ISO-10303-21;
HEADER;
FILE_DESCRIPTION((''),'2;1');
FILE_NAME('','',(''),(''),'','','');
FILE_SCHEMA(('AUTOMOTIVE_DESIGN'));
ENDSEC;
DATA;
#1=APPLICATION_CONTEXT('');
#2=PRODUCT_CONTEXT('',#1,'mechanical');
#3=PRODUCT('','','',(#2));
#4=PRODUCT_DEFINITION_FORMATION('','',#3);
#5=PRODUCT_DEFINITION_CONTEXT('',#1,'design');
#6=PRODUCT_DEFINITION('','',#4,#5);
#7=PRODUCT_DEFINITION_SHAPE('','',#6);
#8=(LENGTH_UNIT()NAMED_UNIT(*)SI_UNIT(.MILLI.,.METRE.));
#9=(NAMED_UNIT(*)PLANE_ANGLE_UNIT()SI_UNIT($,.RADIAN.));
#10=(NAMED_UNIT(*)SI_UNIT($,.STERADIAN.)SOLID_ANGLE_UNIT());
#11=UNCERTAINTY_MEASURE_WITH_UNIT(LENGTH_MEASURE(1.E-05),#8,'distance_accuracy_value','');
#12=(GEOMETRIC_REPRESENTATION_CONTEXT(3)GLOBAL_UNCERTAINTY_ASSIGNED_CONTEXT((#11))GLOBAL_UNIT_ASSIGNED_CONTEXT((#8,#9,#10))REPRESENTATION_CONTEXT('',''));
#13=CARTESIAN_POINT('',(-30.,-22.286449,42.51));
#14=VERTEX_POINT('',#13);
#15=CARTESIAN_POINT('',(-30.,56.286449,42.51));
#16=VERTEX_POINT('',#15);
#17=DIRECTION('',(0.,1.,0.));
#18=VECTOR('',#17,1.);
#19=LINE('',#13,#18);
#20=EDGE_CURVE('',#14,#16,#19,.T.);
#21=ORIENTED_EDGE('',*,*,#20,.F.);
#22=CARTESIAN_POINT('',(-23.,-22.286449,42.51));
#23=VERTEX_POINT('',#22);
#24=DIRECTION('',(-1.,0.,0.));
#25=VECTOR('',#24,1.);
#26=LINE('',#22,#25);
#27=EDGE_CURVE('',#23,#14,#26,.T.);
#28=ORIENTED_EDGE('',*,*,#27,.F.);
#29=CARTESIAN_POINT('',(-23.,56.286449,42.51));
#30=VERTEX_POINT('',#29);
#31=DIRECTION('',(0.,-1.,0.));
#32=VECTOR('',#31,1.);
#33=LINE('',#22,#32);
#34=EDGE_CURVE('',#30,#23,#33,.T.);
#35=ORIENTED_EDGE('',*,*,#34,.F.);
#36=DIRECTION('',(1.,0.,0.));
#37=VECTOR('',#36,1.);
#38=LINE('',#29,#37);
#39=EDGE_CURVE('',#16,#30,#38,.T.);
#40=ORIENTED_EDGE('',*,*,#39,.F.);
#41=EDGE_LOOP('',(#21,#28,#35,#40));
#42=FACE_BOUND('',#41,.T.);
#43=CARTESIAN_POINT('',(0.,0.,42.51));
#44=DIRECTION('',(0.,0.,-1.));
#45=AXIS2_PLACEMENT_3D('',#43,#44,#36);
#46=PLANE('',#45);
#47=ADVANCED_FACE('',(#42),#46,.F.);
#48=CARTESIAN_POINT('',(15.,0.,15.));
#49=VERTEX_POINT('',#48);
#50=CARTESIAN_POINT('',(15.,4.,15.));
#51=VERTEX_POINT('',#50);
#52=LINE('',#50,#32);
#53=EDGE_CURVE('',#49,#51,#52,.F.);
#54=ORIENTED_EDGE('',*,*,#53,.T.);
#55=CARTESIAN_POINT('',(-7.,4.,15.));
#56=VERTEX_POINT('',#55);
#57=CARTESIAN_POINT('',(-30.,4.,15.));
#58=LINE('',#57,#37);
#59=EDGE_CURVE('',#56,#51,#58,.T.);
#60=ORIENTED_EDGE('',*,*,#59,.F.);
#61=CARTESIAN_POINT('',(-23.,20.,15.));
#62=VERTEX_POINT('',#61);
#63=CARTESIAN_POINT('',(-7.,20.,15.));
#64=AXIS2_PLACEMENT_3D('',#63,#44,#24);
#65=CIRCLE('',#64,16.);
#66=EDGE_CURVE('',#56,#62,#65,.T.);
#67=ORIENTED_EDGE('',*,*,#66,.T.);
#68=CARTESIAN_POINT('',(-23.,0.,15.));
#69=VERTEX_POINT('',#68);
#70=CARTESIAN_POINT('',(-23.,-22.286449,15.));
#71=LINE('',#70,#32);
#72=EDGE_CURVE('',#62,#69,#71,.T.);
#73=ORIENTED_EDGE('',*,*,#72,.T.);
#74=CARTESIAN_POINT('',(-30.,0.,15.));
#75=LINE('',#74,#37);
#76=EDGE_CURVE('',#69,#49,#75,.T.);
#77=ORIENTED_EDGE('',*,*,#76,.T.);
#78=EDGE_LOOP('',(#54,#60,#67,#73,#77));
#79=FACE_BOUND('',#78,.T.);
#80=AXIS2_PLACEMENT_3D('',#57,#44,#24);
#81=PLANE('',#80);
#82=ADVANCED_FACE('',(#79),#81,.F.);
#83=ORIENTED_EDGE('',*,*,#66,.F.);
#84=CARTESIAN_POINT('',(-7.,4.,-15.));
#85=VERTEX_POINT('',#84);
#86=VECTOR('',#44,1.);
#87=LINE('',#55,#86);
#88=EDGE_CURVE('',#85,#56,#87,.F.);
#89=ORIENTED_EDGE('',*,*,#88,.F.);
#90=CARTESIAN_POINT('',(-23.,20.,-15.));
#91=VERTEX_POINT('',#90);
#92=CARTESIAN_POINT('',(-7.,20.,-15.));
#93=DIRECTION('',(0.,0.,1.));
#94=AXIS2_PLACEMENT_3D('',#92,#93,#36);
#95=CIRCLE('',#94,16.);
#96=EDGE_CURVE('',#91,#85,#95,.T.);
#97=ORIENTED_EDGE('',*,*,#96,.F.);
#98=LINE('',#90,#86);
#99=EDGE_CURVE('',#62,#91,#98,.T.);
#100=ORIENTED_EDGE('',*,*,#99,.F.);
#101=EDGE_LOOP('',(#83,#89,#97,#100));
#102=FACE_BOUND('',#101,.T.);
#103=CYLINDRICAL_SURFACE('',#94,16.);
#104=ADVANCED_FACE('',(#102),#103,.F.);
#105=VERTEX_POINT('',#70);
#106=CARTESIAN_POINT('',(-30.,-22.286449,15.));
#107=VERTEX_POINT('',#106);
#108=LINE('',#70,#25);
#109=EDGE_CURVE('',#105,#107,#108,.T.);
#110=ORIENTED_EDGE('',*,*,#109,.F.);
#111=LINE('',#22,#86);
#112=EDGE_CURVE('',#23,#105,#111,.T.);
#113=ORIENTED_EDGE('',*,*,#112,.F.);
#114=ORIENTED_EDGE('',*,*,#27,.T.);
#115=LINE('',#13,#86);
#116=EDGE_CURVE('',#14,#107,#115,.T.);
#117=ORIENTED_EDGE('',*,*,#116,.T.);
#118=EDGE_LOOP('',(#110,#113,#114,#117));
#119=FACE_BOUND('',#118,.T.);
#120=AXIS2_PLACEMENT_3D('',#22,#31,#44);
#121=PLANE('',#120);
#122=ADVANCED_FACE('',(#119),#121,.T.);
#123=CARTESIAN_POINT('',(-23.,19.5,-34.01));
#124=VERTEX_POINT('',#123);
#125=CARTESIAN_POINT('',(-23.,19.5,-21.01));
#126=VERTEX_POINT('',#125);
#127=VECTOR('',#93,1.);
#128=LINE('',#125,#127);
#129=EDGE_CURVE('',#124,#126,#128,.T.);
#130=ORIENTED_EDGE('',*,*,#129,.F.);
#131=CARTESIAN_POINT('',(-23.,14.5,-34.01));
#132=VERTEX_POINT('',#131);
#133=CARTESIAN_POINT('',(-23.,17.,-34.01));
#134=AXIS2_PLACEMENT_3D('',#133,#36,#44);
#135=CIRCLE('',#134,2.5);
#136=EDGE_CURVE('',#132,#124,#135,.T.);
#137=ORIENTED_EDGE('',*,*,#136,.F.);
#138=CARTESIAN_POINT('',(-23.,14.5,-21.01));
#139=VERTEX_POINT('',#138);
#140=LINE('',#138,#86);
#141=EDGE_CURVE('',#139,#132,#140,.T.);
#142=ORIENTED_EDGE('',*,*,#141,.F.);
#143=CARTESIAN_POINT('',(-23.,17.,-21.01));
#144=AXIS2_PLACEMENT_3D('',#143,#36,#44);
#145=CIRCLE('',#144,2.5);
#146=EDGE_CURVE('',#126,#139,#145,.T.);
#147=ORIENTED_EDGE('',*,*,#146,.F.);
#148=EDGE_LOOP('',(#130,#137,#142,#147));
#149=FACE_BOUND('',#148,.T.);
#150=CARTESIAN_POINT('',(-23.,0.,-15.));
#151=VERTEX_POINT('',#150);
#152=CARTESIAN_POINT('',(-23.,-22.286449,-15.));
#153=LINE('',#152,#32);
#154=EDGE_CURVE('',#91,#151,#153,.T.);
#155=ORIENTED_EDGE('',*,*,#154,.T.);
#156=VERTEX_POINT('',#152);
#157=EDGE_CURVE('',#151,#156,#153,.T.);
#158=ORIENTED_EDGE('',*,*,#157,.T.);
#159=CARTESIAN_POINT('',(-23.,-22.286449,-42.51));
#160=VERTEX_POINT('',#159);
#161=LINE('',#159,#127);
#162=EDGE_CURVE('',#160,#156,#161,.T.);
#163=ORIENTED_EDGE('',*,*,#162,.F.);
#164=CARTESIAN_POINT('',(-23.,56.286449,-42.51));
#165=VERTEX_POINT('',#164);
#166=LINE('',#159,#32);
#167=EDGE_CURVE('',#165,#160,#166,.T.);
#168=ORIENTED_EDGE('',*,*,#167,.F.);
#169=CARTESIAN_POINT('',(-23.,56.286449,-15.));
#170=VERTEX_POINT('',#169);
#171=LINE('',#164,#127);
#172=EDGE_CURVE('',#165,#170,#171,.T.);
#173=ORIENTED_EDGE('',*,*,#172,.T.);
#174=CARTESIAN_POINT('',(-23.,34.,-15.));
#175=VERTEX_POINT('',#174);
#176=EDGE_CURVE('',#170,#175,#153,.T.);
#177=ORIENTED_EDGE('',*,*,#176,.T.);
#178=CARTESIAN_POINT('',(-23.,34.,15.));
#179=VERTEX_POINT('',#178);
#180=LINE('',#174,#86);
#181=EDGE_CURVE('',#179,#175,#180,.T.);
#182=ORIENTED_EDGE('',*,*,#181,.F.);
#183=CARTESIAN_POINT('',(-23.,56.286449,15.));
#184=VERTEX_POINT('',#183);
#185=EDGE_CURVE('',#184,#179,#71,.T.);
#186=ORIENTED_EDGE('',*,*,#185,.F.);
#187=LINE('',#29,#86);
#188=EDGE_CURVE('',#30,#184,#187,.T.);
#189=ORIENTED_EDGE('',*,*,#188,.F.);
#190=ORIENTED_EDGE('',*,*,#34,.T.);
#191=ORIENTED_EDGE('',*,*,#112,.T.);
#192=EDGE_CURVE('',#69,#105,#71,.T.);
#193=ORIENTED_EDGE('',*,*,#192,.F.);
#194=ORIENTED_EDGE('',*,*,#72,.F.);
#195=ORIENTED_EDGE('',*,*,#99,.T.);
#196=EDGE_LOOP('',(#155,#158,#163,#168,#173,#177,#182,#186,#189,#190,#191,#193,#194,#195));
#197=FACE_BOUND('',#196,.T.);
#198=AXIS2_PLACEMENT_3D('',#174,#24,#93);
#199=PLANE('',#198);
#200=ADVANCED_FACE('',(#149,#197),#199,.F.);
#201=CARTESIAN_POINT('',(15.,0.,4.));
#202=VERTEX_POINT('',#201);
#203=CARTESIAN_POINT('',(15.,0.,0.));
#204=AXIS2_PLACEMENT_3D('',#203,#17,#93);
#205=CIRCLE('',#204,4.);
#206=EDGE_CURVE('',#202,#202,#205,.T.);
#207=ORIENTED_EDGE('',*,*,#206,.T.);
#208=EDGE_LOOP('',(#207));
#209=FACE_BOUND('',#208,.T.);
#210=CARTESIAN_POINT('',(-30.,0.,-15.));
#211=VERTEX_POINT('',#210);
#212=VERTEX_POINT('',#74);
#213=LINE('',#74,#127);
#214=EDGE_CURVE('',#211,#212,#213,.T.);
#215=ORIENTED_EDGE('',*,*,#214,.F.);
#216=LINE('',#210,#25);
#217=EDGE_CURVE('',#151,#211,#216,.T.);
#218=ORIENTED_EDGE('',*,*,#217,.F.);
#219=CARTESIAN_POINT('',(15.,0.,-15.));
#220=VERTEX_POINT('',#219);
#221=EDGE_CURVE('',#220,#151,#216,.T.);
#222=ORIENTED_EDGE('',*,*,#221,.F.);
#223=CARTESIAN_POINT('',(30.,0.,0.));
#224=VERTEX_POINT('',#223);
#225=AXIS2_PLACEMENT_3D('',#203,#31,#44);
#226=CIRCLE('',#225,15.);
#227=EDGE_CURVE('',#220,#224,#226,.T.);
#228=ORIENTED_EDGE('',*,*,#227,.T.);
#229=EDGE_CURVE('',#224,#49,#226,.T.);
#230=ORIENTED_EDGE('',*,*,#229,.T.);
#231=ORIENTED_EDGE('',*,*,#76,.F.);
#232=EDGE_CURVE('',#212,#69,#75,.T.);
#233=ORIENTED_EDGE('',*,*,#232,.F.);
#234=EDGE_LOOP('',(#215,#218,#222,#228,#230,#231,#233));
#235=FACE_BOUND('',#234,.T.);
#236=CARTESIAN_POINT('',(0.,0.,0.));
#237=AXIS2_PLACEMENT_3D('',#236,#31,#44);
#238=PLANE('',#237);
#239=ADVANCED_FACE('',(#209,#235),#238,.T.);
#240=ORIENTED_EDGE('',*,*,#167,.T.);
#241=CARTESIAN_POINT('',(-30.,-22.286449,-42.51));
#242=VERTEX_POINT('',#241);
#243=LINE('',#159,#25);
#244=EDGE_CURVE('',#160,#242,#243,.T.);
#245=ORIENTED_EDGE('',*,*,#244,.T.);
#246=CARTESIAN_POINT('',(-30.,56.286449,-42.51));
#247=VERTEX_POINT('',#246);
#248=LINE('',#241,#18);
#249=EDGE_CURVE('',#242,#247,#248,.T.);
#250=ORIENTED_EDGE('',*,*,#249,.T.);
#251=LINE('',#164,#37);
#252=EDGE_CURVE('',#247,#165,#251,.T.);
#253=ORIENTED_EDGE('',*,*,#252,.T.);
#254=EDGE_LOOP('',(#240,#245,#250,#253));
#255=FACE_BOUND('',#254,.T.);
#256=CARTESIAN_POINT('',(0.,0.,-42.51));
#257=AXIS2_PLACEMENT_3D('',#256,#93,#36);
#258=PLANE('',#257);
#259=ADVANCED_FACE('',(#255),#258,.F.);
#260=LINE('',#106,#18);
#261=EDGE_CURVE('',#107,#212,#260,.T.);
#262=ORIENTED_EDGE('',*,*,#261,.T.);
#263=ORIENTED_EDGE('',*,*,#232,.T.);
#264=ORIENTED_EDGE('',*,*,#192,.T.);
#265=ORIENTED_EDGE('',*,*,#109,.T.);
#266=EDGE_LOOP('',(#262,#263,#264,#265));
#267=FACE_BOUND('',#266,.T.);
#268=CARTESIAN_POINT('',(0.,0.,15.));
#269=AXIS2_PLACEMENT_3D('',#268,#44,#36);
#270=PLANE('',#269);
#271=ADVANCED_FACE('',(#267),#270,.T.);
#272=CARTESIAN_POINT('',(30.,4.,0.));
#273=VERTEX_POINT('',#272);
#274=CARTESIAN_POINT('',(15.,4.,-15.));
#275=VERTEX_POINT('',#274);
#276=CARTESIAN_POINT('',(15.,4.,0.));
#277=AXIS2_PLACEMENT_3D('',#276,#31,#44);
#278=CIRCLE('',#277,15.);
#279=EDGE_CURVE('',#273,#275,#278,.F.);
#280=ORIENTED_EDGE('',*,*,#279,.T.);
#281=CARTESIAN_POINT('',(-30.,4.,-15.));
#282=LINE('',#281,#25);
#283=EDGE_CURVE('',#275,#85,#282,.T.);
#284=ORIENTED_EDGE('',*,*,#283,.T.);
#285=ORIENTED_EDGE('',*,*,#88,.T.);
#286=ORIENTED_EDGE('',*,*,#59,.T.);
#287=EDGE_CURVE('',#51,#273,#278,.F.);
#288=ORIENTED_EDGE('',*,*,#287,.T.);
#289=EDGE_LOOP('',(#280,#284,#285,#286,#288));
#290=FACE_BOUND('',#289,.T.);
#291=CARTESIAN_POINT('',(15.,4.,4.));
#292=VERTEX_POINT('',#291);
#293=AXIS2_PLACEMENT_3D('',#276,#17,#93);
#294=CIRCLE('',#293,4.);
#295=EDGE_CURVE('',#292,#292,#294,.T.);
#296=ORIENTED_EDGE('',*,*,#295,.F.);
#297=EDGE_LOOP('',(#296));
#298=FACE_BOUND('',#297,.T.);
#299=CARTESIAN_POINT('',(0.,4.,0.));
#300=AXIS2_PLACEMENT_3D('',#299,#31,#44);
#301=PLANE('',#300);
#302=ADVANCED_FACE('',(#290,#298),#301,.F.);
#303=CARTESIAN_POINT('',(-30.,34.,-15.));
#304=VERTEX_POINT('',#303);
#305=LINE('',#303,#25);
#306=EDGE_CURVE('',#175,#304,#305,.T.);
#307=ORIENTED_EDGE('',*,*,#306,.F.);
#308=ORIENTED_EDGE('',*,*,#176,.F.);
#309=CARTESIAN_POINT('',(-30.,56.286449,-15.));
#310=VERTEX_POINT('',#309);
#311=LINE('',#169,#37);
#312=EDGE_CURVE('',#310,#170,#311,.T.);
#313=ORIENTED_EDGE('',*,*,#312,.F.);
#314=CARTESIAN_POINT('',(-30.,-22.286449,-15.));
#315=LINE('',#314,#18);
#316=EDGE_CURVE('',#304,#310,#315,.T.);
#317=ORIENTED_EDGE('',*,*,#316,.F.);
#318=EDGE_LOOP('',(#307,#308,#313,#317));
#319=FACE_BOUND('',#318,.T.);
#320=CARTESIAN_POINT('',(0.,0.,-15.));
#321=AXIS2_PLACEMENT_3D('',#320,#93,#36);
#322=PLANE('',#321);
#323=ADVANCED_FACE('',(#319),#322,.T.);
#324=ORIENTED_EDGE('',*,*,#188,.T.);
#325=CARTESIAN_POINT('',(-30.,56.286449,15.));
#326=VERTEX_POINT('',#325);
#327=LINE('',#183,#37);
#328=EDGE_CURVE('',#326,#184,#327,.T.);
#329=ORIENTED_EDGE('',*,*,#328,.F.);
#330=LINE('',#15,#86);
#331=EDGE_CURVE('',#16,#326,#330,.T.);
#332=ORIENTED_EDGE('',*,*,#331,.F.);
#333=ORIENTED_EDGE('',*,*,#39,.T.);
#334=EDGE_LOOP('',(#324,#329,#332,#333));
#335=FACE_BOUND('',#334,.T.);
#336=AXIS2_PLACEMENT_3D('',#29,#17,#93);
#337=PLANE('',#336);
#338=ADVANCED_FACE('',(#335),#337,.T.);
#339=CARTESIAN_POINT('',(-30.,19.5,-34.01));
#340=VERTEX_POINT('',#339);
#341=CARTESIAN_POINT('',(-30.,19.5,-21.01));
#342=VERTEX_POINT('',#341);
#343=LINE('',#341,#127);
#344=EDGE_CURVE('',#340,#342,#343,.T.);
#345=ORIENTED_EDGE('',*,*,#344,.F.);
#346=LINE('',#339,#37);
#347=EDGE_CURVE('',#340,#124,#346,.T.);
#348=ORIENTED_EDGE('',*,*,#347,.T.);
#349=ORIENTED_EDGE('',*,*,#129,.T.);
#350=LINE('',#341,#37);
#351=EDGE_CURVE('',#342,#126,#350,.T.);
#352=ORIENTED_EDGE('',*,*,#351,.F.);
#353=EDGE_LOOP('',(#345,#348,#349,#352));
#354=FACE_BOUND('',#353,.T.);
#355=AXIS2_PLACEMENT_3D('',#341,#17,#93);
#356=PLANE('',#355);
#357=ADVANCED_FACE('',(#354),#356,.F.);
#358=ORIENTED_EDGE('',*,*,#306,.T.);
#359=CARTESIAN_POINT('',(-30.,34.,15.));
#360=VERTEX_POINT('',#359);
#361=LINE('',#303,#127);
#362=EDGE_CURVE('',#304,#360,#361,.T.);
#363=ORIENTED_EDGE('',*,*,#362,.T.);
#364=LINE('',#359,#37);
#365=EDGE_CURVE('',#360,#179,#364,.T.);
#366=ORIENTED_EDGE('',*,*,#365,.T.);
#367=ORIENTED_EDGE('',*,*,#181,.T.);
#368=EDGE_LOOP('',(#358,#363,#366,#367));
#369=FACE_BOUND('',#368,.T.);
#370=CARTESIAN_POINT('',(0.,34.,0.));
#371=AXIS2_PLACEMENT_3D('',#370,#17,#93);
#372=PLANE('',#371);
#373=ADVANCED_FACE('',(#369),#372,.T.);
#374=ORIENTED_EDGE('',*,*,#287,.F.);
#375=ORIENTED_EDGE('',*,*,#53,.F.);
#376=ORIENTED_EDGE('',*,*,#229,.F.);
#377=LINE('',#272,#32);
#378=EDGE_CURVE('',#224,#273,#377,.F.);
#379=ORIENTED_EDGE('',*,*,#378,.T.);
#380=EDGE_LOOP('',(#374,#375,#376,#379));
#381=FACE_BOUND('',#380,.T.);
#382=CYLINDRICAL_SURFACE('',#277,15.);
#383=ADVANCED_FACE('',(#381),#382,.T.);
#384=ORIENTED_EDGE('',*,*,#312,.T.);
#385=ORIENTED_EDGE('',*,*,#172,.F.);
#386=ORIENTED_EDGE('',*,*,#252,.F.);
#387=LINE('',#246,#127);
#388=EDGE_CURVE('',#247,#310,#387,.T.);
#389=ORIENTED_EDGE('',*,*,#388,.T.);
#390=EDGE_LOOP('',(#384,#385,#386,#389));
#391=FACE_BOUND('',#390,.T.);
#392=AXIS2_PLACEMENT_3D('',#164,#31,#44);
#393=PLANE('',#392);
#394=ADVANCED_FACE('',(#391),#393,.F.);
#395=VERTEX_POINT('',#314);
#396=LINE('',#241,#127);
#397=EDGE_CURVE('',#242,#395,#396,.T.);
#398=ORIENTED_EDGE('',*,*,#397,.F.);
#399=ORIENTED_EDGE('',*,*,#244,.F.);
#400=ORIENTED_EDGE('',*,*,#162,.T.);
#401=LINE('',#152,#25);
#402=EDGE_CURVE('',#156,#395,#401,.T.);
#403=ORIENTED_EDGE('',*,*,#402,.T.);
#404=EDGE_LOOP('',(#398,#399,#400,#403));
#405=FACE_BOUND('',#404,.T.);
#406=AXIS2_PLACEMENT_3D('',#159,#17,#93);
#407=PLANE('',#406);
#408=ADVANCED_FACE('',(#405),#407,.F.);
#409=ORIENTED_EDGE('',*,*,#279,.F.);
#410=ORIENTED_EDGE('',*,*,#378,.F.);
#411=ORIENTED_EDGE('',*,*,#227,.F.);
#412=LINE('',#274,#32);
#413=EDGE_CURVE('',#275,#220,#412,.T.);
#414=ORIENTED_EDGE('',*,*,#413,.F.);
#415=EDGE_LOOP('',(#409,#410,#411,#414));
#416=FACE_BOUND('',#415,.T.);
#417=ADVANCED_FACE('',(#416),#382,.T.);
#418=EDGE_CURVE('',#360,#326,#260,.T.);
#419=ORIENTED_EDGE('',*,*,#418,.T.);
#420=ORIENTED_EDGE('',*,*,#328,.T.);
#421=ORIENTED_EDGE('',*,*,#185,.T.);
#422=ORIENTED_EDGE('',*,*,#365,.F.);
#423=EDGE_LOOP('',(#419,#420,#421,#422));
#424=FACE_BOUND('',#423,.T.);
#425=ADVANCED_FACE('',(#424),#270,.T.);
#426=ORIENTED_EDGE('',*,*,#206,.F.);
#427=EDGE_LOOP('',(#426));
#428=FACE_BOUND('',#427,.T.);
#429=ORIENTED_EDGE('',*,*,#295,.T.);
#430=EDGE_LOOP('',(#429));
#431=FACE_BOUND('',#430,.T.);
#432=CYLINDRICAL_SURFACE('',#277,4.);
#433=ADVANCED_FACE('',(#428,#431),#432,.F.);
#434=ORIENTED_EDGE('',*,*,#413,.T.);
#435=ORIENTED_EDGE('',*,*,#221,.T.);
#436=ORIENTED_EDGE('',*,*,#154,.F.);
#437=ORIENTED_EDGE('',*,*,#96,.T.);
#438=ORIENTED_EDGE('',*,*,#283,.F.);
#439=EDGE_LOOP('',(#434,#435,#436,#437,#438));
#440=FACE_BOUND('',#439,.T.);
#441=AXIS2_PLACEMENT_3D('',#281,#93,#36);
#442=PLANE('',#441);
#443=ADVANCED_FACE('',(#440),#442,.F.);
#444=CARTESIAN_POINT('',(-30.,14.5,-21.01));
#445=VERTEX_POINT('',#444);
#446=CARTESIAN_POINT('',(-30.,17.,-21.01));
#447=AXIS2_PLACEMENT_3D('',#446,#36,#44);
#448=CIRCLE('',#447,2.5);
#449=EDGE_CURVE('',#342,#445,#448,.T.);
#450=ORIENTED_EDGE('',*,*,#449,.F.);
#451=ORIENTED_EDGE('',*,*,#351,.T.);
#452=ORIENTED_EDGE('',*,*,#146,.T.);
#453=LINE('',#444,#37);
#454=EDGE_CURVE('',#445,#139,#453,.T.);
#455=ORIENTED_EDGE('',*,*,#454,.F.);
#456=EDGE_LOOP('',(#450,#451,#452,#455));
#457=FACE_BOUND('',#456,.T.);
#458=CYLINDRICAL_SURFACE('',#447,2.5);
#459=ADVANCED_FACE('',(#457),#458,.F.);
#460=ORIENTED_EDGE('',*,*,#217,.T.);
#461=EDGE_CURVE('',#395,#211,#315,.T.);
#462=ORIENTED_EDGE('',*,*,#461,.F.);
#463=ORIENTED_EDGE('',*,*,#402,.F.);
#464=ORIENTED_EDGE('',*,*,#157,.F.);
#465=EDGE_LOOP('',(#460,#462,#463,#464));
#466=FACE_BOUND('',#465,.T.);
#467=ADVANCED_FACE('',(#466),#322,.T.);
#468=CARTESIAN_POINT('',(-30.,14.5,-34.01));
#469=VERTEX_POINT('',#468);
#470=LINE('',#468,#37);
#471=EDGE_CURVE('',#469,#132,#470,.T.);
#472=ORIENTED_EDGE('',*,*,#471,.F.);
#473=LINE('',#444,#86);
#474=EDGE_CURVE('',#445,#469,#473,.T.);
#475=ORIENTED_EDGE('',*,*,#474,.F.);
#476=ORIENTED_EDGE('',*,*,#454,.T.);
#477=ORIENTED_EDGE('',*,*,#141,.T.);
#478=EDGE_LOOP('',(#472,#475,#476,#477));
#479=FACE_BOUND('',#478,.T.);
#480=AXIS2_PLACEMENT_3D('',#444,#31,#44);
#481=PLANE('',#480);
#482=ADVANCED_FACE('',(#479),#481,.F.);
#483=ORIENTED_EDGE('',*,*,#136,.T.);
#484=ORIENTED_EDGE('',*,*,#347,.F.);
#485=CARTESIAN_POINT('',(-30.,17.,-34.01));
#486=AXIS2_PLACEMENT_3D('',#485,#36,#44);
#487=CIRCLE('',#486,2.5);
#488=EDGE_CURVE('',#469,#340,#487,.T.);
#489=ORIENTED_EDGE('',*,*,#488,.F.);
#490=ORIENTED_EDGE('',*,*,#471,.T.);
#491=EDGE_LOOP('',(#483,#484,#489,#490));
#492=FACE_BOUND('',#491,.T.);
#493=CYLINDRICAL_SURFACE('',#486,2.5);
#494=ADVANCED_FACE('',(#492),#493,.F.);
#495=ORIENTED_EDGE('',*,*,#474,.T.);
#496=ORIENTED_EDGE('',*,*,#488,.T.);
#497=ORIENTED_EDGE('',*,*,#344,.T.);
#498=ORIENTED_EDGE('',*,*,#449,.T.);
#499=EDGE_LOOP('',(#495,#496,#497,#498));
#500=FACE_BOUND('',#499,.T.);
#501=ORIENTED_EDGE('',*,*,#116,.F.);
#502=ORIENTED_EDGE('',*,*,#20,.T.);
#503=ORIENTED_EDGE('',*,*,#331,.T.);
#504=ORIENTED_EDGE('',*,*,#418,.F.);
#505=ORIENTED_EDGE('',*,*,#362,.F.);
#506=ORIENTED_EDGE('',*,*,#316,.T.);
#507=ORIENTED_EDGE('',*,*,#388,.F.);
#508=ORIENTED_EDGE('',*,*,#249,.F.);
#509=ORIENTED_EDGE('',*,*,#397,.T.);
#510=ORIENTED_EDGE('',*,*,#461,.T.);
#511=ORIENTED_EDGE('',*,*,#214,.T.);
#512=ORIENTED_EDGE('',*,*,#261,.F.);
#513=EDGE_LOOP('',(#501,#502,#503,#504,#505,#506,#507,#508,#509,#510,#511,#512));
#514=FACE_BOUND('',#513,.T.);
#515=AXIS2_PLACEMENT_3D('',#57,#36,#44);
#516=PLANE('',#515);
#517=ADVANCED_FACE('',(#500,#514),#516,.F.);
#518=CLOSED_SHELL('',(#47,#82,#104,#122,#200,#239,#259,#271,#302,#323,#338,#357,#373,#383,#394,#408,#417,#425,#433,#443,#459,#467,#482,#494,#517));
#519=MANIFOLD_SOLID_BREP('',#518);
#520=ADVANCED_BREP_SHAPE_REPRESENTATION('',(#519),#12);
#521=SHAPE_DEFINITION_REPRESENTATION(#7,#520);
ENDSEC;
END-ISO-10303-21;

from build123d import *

# Parameters (mm, degrees)
SKETCH_1_W          = 60
SKETCH_1_H          = 30
SKETCH_1_R          = 4
EXTRUDE_1_DEPTH     = 4
SKETCH_2_W          = 7
SKETCH_2_H          = 30
EXTRUDE_2_DEPTH     = 30
SKETCH_4_W          = 7
SKETCH_4_H          = 78.572897546
EXTRUDE_3_DEPTH     = 27.51
FILLET_1_R          = 16
CUT_EXTRUDE_2_DEPTH = 89.228478483
FILLET_2_R          = 15


with BuildPart() as part:
    # 草圖1 → 填料-伸長1 (new body)
    with BuildSketch(Plane(origin=(0, 0, 0), x_dir=(1, 0, 0), z_dir=(0, 1, 0))):
        Rectangle(SKETCH_1_W, SKETCH_1_H)
        with Locations(Location((15, 0, 0), (0, 0, 270))):
            Circle(SKETCH_1_R, mode=Mode.SUBTRACT)
    extrude(amount=EXTRUDE_1_DEPTH)

    # 草圖2 → 填料-伸長2 (add)
    with BuildSketch(Plane(origin=(0, 4, 0), x_dir=(1, 0, 0), z_dir=(0, 1, 0))):
        with Locations((-26.5, 0)):
            Rectangle(SKETCH_2_W, SKETCH_2_H)
    extrude(amount=EXTRUDE_2_DEPTH)

    # 草圖4 → 填料-伸長3 (add)
    with BuildSketch(Plane(origin=(0, 0, -15), x_dir=(-1, 0, 0), z_dir=(0, 0, -1))):
        with Locations((26.5, 17)):
            Rectangle(SKETCH_4_W, SKETCH_4_H)
    extrude_3 = extrude(amount=EXTRUDE_3_DEPTH)

    # 鏡射1: 填料-伸長3 across plane
    add(extrude_3.mirror(Plane.XY))

    # 圓角1
    fillet_1_edges = [part.edges().sort_by_distance(p)[0] for p in [
        (-23, 4, 0),
    ]]
    fillet(fillet_1_edges, radius=FILLET_1_R)

    # 草圖5 → 除料-伸長2 (cut, through all)
    with BuildSketch(Plane(origin=(-23, 0, 0), x_dir=(0, 0, -1), z_dir=(1, 0, 0))):
        with BuildLine():
            Line((21.01, 19.5), (34.01, 19.5))
            ThreePointArc((34.01, 19.5), (36.51, 17), (34.01, 14.5))
            Line((34.01, 14.5), (21.01, 14.5))
            ThreePointArc((21.01, 14.5), (18.51, 17), (21.01, 19.5))
        make_face()
    extrude(amount=-CUT_EXTRUDE_2_DEPTH, mode=Mode.SUBTRACT)

    # 圓角2
    fillet_2_edges = [part.edges().sort_by_distance(p)[0] for p in [
        (30, 2, 15),
        (30, 2, -15),
    ]]
    fillet(fillet_2_edges, radius=FILLET_2_R - 0.0001)  # a hair under: the kernel refuses the full size


solid = part.part
